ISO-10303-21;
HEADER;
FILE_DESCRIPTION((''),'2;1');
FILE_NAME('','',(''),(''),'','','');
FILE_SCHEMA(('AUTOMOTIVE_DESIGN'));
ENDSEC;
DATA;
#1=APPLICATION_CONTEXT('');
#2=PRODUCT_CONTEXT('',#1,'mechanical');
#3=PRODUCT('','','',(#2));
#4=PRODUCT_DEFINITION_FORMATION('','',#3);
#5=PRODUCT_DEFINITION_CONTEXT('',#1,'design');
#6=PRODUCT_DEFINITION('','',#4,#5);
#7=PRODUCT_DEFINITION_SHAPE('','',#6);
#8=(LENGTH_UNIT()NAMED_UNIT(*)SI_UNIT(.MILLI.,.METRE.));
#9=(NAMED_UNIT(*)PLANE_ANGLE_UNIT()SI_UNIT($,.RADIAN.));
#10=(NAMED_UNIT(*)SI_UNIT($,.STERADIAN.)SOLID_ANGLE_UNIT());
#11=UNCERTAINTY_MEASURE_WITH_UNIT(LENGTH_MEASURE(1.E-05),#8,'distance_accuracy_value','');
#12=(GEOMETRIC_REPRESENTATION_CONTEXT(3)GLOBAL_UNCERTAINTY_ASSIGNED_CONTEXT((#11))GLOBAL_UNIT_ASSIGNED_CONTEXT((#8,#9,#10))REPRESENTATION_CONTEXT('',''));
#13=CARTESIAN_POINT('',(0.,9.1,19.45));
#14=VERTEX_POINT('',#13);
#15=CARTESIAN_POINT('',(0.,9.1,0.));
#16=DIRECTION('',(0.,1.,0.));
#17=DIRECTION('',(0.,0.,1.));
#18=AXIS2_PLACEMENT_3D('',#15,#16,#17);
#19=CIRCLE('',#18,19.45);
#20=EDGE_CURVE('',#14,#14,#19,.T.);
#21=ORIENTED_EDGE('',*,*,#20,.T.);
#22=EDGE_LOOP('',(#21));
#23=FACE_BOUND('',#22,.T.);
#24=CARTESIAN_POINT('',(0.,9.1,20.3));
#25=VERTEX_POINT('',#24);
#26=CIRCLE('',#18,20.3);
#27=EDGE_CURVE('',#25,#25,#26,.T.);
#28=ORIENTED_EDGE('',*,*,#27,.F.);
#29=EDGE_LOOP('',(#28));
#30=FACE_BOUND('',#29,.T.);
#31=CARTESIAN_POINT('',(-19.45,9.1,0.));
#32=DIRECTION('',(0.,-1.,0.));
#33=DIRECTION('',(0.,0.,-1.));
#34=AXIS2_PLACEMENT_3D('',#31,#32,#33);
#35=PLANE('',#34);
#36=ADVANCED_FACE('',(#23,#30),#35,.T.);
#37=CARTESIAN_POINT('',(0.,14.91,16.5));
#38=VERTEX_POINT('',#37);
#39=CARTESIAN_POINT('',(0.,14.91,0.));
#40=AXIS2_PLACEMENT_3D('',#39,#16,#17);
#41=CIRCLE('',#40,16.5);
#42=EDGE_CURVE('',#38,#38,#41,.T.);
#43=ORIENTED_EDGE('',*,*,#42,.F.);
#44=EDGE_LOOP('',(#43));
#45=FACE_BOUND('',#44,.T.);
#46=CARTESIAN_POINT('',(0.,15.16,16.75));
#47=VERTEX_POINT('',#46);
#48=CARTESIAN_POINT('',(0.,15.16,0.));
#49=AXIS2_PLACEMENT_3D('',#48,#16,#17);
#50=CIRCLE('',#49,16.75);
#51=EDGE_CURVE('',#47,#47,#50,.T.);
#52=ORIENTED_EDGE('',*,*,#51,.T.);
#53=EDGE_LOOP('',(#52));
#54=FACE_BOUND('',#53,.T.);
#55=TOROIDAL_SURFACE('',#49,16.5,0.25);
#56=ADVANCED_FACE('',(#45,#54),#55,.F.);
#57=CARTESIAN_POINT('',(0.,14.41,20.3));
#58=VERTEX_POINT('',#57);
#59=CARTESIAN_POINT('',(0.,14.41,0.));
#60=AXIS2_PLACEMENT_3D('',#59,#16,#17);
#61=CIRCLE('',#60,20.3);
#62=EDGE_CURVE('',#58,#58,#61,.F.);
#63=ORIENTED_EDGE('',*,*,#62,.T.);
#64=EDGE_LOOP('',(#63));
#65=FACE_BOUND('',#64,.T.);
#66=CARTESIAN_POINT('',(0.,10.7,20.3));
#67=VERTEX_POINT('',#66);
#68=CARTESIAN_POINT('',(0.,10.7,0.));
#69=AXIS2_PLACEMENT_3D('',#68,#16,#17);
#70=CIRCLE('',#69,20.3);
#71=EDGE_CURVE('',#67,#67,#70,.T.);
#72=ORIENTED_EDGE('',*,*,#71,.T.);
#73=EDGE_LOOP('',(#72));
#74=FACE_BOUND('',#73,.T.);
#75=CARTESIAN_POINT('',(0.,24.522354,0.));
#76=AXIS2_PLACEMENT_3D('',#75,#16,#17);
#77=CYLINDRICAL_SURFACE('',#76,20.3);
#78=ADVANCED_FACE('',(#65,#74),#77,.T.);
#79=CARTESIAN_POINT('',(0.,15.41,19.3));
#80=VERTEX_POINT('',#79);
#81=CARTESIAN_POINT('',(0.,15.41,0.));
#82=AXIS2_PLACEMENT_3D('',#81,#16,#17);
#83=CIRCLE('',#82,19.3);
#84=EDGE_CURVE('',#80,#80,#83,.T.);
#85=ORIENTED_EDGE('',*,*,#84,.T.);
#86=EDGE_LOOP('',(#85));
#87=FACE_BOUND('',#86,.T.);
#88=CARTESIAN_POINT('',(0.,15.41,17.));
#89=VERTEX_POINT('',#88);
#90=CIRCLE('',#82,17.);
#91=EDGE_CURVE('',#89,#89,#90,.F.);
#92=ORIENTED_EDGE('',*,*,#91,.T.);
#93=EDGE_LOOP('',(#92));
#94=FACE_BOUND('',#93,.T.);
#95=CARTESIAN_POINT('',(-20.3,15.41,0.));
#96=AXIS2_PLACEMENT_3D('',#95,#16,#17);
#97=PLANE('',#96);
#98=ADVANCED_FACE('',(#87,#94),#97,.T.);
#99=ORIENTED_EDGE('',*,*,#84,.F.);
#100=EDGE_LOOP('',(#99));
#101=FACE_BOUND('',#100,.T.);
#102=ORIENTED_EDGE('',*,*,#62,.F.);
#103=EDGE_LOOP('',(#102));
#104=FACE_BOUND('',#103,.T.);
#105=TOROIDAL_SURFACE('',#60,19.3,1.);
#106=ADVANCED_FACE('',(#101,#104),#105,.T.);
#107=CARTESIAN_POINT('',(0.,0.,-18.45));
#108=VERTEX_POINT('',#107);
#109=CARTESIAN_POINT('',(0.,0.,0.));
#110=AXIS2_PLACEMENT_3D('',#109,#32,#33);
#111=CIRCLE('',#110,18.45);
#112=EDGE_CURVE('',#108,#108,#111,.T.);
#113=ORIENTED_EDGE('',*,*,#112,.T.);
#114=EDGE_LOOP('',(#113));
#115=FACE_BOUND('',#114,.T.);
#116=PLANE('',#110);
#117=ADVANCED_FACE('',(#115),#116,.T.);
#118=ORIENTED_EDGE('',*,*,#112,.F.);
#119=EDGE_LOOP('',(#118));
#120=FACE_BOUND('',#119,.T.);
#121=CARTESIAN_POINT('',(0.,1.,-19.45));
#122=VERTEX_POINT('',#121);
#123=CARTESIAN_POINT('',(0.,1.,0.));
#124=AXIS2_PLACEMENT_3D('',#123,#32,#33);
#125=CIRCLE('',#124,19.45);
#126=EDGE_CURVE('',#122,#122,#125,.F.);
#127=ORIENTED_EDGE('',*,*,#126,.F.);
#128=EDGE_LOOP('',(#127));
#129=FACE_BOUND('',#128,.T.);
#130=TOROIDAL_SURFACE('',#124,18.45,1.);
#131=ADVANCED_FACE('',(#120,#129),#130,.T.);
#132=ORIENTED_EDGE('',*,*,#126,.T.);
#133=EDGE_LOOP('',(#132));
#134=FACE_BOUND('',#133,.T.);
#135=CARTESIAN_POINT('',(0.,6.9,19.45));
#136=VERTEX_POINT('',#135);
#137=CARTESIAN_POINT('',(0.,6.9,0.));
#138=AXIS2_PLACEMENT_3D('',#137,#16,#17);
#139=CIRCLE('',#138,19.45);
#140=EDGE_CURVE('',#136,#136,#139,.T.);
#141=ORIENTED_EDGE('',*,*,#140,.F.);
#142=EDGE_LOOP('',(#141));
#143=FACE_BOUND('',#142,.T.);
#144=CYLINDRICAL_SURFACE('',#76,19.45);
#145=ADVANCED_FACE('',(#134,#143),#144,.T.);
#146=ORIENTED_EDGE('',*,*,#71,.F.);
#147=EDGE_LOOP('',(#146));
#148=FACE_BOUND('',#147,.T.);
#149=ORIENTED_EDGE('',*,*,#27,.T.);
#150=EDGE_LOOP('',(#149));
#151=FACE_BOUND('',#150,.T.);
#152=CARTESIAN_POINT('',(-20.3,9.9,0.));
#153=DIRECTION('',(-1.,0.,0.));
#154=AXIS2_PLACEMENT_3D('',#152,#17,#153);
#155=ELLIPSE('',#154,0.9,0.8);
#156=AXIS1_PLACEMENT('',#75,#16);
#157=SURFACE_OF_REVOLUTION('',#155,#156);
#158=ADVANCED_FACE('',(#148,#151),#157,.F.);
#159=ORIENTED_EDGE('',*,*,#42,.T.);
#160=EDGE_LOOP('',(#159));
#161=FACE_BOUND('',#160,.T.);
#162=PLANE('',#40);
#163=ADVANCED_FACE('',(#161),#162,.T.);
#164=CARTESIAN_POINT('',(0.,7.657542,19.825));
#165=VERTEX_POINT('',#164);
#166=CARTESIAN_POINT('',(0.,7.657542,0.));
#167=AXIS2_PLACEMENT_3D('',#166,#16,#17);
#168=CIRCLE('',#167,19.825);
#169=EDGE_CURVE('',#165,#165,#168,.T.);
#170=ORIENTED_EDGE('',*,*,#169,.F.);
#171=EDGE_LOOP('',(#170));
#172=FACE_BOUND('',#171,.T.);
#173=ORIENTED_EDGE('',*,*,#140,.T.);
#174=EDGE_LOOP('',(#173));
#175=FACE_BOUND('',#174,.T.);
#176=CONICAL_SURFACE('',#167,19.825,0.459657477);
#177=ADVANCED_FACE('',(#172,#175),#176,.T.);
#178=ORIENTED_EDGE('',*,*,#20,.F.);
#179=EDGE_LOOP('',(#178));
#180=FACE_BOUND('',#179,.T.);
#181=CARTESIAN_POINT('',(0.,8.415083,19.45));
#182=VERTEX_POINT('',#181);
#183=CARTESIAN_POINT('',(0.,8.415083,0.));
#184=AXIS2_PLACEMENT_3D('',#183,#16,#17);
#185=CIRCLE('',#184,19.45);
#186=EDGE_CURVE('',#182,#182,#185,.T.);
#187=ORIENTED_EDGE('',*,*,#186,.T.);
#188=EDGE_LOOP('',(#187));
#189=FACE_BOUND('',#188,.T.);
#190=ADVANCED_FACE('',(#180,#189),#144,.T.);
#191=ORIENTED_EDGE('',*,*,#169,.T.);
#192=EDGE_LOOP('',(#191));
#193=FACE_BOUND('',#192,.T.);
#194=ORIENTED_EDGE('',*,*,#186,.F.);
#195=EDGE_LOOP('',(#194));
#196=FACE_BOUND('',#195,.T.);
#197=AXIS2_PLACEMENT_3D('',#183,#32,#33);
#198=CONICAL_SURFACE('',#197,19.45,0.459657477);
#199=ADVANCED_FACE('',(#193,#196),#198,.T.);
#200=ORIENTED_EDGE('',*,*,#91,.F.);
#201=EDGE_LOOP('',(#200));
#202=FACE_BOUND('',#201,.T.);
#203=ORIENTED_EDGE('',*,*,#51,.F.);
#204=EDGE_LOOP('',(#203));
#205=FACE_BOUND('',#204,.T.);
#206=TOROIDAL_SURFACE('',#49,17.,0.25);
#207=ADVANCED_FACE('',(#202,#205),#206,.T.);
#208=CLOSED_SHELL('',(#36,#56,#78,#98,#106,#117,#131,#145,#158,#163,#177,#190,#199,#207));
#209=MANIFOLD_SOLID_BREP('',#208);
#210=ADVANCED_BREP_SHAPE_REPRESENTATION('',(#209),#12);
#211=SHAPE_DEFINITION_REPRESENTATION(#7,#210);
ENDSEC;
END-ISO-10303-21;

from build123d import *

# Parameters (mm, degrees)
SKETCH2_R          = 16.75
CUT_EXTRUDE1_DEPTH = 0.5
FILLET1_R          = 1
FILLET2_R          = 0.25


with BuildPart() as part:
    # Sketch1 → Revolve1 (revolve)
    with BuildSketch(Plane.XY, mode=Mode.PRIVATE) as revolve1_sk:
        with BuildLine():
            Line((0, 0), (-19.45, 0))
            Line((-19.45, 0), (-19.45, 6.9))
            Line((-19.45, 6.9), (-19.825, 7.657541722))
            Line((-19.825, 7.657541722), (-19.45, 8.415083444))
            Line((-19.45, 8.415083444), (-19.45, 9.1))
            Line((-19.45, 9.1), (-20.3, 9.1))
            add(Edge.make_bspline(
                [(-20.3, 10.7), (-21.2, 10.7), (-21.2, 9.9), (-21.2, 9.1), (-20.3, 9.1)],
                knots=[4.71238898, 4.71238898, 4.71238898, 6.283185307, 6.283185307, 7.853981634, 7.853981634, 7.853981634], degree=2, weights=[1, 0.707106781, 1, 0.707106781, 1]))
            Line((-20.3, 10.7), (-20.3, 15.41))
            Line((-20.3, 15.41), (0, 15.41))
            Line((0, 15.41), (0, 0))
        make_face()
    revolve(revolve1_sk.sketch.rotate(Axis((0, 24.52235385, 0), (0, -1, 0)), 270), axis=Axis((0, 24.52235385, 0), (0, -1, 0)))

    # Sketch2 → Cut-Extrude1 (cut)
    with BuildSketch(Plane(origin=(0, 15.41, 0), x_dir=(1, 0, 0), z_dir=(0, 1, 0))):
        with Locations(Location((0, 0, 0), (0, 0, 270))):
            Circle(SKETCH2_R)
    extrude(amount=-CUT_EXTRUDE1_DEPTH, mode=Mode.SUBTRACT)

    # Fillet1
    fillet1_edges = [part.edges().sort_by_distance(p)[0] for p in [
        (0, 15.41, -20.3),
        (0, 0, -19.45),
    ]]
    fillet(fillet1_edges, radius=FILLET1_R)

    # Fillet2
    fillet2_edges = [part.edges().sort_by_distance(p)[0] for p in [
        (0, 14.91, -16.75),
        (0, 15.41, -16.75),
    ]]
    fillet(fillet2_edges, radius=FILLET2_R - 0.0001)  # a hair under: the kernel refuses the full size


solid = part.part
